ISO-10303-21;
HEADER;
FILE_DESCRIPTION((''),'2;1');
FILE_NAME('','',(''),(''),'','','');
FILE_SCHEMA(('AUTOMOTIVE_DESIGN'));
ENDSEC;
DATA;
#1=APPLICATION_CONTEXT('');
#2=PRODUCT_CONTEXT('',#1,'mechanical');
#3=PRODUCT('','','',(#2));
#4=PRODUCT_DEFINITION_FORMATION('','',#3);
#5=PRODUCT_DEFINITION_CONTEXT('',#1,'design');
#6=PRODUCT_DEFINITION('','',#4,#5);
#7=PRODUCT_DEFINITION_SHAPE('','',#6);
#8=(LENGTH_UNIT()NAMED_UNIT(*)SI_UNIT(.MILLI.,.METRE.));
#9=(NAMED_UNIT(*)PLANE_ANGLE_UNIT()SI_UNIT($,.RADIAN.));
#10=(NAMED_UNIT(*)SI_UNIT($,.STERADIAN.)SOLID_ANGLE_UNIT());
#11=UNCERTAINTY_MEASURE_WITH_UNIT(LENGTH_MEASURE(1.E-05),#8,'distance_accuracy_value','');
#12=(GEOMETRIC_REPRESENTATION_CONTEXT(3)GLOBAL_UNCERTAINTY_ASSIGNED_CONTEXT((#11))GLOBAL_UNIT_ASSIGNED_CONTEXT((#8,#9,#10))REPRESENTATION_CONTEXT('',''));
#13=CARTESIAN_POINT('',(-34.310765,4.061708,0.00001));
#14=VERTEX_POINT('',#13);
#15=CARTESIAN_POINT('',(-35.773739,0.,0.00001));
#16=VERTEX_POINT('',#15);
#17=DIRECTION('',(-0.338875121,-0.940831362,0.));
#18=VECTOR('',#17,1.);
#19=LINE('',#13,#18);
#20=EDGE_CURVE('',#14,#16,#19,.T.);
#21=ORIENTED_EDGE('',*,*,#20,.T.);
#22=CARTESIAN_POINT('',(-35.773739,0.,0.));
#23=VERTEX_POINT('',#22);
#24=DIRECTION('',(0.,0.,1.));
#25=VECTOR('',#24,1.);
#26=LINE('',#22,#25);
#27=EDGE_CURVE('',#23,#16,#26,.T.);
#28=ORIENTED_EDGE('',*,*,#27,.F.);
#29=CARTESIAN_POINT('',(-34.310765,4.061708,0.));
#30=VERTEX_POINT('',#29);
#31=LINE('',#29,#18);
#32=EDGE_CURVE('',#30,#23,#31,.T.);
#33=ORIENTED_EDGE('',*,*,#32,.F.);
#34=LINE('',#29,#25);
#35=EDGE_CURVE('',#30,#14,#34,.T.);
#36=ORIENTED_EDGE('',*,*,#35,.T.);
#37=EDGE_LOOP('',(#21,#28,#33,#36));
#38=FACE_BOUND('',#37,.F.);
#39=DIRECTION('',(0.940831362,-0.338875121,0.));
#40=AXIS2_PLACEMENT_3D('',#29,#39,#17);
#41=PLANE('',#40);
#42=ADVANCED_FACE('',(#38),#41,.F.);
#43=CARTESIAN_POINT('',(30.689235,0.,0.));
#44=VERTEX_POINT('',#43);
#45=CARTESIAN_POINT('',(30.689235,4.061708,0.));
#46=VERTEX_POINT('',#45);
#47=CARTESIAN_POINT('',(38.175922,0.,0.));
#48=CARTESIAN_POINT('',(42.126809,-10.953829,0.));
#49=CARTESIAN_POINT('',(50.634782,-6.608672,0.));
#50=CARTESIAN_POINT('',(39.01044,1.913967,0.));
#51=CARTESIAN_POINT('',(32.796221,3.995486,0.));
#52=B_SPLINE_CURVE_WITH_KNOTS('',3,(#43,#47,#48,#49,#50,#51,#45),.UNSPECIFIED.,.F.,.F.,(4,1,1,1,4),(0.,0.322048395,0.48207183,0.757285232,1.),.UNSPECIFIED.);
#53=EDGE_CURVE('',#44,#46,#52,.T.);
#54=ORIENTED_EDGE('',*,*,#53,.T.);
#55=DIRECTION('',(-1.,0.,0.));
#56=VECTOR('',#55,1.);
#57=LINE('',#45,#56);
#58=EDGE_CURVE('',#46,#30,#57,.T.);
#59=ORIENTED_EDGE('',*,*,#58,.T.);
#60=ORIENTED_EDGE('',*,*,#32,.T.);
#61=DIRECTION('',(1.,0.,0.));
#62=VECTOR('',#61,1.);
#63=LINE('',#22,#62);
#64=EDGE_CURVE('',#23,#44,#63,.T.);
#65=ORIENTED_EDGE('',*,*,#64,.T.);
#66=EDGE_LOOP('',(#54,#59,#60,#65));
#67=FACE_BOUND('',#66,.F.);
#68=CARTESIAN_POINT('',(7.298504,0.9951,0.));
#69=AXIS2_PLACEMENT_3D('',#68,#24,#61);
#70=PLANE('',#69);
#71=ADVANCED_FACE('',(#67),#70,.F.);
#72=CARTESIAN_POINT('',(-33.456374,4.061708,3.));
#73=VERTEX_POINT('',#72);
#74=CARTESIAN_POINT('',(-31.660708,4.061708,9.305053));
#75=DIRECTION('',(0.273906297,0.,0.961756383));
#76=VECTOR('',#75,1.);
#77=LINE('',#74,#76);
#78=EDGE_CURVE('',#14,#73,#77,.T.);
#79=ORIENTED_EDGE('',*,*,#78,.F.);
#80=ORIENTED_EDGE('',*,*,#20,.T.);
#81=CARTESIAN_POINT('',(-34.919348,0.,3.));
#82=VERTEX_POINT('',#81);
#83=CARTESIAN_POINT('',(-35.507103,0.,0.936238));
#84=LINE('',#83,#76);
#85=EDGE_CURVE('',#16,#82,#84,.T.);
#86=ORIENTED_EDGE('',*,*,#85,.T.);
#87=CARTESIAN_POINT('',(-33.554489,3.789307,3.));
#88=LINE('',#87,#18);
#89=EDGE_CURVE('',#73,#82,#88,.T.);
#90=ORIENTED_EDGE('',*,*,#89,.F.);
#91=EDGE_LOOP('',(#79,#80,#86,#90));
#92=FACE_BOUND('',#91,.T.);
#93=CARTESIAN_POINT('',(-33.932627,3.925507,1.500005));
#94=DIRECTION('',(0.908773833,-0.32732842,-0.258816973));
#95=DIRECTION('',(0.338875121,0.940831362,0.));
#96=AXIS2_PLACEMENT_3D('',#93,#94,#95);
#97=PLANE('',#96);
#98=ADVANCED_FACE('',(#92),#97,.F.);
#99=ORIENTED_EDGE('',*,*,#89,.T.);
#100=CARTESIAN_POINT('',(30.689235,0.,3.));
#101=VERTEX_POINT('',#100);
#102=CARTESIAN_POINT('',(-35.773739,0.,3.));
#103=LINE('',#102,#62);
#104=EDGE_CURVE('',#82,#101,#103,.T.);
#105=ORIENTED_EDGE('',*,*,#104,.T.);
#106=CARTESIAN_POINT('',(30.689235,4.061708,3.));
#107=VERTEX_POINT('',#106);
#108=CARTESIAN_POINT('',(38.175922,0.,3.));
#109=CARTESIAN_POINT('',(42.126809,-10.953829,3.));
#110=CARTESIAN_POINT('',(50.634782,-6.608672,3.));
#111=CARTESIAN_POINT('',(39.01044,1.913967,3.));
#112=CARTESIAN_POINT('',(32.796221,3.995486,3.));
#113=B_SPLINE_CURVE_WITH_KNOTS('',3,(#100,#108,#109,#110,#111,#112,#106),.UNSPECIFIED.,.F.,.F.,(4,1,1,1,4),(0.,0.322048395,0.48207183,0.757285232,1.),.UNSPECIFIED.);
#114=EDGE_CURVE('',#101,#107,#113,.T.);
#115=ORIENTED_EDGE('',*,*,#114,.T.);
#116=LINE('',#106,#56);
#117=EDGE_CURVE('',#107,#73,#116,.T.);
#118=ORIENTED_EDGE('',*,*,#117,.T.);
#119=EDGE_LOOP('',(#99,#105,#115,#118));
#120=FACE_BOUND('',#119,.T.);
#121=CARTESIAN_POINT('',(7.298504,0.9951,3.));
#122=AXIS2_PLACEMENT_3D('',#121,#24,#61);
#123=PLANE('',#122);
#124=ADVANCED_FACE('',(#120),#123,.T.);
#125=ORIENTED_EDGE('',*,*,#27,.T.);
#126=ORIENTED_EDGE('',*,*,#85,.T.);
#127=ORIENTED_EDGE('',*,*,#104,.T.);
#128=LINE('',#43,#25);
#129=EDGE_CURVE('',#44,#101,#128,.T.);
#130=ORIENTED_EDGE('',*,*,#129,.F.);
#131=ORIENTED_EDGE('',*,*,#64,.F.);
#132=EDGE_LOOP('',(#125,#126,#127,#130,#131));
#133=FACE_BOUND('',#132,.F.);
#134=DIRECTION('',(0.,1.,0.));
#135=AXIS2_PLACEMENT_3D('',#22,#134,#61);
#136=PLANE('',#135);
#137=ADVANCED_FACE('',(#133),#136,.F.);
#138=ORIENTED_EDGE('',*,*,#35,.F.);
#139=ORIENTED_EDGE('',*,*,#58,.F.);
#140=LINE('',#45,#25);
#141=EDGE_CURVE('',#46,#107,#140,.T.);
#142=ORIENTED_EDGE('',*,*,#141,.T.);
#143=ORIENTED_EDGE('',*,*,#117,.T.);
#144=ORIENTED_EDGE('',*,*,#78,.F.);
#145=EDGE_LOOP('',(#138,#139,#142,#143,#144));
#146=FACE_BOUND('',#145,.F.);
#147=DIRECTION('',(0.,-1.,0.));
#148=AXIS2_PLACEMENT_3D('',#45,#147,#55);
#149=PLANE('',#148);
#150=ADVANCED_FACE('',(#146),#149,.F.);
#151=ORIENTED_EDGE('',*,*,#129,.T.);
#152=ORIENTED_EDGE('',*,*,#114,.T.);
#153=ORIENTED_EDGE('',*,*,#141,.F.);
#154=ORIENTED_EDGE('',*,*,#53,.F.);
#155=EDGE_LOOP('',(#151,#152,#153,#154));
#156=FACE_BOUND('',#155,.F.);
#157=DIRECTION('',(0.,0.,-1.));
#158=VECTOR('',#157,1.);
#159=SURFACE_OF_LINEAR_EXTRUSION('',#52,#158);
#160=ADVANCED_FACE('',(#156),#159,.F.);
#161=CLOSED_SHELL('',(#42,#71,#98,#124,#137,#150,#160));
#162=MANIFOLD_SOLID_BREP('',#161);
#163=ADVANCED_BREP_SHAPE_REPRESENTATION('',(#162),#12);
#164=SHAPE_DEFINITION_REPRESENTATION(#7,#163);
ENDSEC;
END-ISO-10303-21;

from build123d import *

# Parameters (mm, degrees)
F1_DEPTH = 3
F2_SIZE2 = 0.803838
F2_SIZE  = 2.99999


# Not quite as in the source:
# - a fillet or chamfer is up to 0.001 mm smaller than in the source, because OpenCascade refuses the exact size


with BuildPart() as f1:
    # F0 (on Top) → F1 (new body)
    with BuildSketch(Plane.XY):
        with BuildLine():
            Line((-34.3107653813, 4.0617076386), (-34.3107653813, 0))
            Line((-34.3107653813, 0), (30.6892346187, 0))
            add(Edge.make_bspline(
                [(30.6892346187, 0), (38.175922445, 0), (42.1268090367, -10.953828662), (50.634781902, -6.6086722293), (39.010439615, 1.9139667015), (32.7962212222, 3.9954856778), (30.6892346187, 4.0617076386)],
                knots=[0, 0, 0, 0, 0.322048395, 0.4820718301, 0.7572852316, 1, 1, 1, 1], degree=3))
            Line((30.6892346187, 4.0617076386), (-34.3107653813, 4.0617076386))
        make_face()
        Polygon((-35.7737392187, 0), (-34.3107653813, 0), (-34.3107653813, 4.0617076386), align=None)
    extrude(amount=F1_DEPTH)

    # F2 (size 3 and 0.8038475773 in the source; OpenCascade refuses exactly that, so slightly less here)
    f2_edges = [f1.edges().sort_by_distance(p)[0] for p in [
        (-35.042252, 2.030854, 3),
    ]]
    f2_side = f1.faces().sort_by_distance((-35.042252, 2.030854, 1.5))[0]
    chamfer(f2_edges, length=F2_SIZE, length2=F2_SIZE2, reference=f2_side)


solid = f1.part
